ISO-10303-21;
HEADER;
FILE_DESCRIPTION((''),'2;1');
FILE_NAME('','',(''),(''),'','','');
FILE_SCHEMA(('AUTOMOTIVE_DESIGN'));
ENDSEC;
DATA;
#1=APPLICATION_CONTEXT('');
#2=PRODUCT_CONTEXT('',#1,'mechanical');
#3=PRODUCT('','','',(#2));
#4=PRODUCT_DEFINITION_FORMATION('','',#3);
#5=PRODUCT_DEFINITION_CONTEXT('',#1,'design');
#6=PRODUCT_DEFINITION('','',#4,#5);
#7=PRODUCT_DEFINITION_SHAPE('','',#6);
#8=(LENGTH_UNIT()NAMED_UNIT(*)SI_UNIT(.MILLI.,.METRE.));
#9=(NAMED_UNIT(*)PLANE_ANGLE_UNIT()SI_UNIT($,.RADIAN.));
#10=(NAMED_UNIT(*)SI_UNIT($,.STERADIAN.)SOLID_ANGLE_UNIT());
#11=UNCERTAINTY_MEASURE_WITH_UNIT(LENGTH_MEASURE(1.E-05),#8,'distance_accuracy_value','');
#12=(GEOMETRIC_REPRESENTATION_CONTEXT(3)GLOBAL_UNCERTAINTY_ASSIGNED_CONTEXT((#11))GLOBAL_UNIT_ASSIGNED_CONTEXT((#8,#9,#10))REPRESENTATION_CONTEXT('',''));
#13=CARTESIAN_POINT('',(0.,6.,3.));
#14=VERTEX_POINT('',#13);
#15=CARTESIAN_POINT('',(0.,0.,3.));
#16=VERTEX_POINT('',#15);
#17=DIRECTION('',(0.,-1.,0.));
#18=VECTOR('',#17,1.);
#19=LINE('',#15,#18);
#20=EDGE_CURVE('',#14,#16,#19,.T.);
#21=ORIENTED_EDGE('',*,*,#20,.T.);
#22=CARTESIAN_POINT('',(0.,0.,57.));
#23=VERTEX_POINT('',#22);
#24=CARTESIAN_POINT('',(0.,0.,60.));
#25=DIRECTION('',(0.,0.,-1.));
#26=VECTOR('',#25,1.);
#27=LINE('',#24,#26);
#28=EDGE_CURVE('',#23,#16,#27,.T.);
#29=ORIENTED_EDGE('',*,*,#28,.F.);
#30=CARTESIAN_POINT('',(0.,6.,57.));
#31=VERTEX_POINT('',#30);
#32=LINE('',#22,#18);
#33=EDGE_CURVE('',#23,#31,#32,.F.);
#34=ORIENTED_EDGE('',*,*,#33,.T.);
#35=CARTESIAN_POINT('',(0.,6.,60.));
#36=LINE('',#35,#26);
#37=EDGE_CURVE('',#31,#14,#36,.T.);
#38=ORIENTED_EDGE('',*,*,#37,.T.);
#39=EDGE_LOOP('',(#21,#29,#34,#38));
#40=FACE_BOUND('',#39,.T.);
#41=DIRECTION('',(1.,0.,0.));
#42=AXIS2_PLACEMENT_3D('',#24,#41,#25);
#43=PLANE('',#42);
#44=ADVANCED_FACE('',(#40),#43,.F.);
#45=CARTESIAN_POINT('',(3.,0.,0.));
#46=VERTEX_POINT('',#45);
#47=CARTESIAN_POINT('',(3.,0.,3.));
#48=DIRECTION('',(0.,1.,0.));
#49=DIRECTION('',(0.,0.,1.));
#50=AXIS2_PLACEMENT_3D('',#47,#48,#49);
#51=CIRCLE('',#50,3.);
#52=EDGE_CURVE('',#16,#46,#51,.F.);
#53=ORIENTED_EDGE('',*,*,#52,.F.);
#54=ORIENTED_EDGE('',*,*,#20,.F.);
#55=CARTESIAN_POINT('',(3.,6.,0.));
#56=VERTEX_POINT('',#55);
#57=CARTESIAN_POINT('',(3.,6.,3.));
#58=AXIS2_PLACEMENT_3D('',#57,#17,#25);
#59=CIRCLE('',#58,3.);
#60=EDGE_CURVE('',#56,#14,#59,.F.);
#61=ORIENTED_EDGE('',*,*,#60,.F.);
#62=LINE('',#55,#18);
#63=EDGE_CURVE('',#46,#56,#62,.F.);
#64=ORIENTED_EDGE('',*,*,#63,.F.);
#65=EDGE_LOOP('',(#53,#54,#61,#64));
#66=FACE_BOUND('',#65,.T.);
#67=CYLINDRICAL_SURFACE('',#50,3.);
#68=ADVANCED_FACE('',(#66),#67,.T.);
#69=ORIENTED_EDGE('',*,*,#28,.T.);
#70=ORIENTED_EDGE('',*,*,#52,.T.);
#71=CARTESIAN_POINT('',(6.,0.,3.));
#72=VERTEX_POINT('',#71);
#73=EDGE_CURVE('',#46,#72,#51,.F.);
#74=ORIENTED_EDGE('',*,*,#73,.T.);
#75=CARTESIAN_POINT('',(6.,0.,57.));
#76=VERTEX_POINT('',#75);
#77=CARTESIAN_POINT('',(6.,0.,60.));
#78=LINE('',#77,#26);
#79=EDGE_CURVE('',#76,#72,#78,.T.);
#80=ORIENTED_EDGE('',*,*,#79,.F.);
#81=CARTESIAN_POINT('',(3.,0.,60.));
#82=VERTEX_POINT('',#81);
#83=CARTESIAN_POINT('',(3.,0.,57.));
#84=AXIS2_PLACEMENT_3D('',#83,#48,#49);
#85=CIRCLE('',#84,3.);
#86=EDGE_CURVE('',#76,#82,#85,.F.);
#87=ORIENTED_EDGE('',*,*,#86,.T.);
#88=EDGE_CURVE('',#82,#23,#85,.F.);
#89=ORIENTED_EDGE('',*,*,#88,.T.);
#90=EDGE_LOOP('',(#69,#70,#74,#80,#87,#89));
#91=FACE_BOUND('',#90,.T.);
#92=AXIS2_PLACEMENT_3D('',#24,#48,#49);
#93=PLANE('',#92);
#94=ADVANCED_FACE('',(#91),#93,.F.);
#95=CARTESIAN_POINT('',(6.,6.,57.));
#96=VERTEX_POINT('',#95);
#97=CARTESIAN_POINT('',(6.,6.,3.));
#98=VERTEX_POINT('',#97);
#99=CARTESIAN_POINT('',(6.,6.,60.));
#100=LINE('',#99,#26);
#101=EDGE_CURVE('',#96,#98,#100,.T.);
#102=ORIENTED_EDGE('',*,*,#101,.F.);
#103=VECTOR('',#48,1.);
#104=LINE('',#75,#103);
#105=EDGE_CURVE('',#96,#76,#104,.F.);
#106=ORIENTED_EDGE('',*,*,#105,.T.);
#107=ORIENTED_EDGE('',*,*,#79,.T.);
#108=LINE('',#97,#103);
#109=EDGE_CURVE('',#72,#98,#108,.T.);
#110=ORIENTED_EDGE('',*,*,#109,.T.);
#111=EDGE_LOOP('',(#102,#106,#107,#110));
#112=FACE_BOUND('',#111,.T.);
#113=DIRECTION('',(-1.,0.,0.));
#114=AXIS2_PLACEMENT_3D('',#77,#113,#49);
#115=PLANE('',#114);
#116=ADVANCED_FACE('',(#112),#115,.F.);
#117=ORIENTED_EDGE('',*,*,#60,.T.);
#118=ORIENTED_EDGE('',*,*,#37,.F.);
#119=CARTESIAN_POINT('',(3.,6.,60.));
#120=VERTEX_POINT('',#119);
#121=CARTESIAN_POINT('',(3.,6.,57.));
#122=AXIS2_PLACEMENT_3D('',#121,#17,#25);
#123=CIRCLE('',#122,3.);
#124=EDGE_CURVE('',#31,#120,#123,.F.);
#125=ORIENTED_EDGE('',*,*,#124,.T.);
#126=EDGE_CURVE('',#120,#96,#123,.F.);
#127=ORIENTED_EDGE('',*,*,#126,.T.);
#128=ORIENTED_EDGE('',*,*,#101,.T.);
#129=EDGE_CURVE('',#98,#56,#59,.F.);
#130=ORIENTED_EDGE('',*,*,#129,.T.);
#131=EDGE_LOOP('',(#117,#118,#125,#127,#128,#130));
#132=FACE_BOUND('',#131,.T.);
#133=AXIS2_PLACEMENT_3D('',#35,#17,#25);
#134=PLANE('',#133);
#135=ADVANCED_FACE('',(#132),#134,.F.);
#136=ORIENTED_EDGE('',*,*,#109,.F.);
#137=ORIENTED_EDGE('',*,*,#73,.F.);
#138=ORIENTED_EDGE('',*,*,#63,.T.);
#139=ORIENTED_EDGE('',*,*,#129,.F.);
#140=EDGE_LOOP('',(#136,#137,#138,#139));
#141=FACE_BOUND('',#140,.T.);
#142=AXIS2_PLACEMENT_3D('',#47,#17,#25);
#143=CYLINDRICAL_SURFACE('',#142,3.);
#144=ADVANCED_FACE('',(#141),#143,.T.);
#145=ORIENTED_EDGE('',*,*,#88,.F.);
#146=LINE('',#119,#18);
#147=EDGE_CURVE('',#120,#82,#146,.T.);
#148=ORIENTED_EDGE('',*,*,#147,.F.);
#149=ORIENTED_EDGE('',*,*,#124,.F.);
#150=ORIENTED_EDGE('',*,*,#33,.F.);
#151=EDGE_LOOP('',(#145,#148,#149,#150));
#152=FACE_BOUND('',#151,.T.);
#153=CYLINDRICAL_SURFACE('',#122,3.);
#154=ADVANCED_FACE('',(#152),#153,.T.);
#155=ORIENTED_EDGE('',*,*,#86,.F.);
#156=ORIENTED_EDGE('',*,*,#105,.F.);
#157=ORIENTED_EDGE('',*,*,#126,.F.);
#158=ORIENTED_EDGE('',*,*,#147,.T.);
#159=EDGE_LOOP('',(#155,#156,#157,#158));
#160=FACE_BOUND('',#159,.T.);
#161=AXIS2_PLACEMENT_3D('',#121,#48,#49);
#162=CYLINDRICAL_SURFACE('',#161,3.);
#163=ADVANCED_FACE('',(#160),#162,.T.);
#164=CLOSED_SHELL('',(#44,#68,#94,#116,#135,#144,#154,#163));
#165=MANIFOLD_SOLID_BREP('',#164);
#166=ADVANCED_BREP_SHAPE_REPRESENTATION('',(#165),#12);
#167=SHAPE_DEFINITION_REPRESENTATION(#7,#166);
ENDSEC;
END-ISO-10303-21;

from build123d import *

# Parameters (mm, degrees)
ESQUISSE1_W          = 6
ESQUISSE1_H          = 6
BASE_EXTRUSION_DEPTH = 60
CONG_1_R             = 3


with BuildPart() as part:
    # Esquisse1 → Base-Extrusion (new body)
    with BuildSketch(Plane.XY):
        with Locations((3, 3)):
            Rectangle(ESQUISSE1_W, ESQUISSE1_H)
    extrude(amount=BASE_EXTRUSION_DEPTH)

    # Congé1
    cong_1_edges = [part.edges().sort_by_distance(p)[0] for p in [
        (6, 3, 0),
        (6, 3, 60),
        (0, 3, 0),
        (0, 3, 60),
    ]]
    fillet(cong_1_edges, radius=CONG_1_R - 0.0001)  # a hair under: the kernel refuses the full size


solid = part.part
